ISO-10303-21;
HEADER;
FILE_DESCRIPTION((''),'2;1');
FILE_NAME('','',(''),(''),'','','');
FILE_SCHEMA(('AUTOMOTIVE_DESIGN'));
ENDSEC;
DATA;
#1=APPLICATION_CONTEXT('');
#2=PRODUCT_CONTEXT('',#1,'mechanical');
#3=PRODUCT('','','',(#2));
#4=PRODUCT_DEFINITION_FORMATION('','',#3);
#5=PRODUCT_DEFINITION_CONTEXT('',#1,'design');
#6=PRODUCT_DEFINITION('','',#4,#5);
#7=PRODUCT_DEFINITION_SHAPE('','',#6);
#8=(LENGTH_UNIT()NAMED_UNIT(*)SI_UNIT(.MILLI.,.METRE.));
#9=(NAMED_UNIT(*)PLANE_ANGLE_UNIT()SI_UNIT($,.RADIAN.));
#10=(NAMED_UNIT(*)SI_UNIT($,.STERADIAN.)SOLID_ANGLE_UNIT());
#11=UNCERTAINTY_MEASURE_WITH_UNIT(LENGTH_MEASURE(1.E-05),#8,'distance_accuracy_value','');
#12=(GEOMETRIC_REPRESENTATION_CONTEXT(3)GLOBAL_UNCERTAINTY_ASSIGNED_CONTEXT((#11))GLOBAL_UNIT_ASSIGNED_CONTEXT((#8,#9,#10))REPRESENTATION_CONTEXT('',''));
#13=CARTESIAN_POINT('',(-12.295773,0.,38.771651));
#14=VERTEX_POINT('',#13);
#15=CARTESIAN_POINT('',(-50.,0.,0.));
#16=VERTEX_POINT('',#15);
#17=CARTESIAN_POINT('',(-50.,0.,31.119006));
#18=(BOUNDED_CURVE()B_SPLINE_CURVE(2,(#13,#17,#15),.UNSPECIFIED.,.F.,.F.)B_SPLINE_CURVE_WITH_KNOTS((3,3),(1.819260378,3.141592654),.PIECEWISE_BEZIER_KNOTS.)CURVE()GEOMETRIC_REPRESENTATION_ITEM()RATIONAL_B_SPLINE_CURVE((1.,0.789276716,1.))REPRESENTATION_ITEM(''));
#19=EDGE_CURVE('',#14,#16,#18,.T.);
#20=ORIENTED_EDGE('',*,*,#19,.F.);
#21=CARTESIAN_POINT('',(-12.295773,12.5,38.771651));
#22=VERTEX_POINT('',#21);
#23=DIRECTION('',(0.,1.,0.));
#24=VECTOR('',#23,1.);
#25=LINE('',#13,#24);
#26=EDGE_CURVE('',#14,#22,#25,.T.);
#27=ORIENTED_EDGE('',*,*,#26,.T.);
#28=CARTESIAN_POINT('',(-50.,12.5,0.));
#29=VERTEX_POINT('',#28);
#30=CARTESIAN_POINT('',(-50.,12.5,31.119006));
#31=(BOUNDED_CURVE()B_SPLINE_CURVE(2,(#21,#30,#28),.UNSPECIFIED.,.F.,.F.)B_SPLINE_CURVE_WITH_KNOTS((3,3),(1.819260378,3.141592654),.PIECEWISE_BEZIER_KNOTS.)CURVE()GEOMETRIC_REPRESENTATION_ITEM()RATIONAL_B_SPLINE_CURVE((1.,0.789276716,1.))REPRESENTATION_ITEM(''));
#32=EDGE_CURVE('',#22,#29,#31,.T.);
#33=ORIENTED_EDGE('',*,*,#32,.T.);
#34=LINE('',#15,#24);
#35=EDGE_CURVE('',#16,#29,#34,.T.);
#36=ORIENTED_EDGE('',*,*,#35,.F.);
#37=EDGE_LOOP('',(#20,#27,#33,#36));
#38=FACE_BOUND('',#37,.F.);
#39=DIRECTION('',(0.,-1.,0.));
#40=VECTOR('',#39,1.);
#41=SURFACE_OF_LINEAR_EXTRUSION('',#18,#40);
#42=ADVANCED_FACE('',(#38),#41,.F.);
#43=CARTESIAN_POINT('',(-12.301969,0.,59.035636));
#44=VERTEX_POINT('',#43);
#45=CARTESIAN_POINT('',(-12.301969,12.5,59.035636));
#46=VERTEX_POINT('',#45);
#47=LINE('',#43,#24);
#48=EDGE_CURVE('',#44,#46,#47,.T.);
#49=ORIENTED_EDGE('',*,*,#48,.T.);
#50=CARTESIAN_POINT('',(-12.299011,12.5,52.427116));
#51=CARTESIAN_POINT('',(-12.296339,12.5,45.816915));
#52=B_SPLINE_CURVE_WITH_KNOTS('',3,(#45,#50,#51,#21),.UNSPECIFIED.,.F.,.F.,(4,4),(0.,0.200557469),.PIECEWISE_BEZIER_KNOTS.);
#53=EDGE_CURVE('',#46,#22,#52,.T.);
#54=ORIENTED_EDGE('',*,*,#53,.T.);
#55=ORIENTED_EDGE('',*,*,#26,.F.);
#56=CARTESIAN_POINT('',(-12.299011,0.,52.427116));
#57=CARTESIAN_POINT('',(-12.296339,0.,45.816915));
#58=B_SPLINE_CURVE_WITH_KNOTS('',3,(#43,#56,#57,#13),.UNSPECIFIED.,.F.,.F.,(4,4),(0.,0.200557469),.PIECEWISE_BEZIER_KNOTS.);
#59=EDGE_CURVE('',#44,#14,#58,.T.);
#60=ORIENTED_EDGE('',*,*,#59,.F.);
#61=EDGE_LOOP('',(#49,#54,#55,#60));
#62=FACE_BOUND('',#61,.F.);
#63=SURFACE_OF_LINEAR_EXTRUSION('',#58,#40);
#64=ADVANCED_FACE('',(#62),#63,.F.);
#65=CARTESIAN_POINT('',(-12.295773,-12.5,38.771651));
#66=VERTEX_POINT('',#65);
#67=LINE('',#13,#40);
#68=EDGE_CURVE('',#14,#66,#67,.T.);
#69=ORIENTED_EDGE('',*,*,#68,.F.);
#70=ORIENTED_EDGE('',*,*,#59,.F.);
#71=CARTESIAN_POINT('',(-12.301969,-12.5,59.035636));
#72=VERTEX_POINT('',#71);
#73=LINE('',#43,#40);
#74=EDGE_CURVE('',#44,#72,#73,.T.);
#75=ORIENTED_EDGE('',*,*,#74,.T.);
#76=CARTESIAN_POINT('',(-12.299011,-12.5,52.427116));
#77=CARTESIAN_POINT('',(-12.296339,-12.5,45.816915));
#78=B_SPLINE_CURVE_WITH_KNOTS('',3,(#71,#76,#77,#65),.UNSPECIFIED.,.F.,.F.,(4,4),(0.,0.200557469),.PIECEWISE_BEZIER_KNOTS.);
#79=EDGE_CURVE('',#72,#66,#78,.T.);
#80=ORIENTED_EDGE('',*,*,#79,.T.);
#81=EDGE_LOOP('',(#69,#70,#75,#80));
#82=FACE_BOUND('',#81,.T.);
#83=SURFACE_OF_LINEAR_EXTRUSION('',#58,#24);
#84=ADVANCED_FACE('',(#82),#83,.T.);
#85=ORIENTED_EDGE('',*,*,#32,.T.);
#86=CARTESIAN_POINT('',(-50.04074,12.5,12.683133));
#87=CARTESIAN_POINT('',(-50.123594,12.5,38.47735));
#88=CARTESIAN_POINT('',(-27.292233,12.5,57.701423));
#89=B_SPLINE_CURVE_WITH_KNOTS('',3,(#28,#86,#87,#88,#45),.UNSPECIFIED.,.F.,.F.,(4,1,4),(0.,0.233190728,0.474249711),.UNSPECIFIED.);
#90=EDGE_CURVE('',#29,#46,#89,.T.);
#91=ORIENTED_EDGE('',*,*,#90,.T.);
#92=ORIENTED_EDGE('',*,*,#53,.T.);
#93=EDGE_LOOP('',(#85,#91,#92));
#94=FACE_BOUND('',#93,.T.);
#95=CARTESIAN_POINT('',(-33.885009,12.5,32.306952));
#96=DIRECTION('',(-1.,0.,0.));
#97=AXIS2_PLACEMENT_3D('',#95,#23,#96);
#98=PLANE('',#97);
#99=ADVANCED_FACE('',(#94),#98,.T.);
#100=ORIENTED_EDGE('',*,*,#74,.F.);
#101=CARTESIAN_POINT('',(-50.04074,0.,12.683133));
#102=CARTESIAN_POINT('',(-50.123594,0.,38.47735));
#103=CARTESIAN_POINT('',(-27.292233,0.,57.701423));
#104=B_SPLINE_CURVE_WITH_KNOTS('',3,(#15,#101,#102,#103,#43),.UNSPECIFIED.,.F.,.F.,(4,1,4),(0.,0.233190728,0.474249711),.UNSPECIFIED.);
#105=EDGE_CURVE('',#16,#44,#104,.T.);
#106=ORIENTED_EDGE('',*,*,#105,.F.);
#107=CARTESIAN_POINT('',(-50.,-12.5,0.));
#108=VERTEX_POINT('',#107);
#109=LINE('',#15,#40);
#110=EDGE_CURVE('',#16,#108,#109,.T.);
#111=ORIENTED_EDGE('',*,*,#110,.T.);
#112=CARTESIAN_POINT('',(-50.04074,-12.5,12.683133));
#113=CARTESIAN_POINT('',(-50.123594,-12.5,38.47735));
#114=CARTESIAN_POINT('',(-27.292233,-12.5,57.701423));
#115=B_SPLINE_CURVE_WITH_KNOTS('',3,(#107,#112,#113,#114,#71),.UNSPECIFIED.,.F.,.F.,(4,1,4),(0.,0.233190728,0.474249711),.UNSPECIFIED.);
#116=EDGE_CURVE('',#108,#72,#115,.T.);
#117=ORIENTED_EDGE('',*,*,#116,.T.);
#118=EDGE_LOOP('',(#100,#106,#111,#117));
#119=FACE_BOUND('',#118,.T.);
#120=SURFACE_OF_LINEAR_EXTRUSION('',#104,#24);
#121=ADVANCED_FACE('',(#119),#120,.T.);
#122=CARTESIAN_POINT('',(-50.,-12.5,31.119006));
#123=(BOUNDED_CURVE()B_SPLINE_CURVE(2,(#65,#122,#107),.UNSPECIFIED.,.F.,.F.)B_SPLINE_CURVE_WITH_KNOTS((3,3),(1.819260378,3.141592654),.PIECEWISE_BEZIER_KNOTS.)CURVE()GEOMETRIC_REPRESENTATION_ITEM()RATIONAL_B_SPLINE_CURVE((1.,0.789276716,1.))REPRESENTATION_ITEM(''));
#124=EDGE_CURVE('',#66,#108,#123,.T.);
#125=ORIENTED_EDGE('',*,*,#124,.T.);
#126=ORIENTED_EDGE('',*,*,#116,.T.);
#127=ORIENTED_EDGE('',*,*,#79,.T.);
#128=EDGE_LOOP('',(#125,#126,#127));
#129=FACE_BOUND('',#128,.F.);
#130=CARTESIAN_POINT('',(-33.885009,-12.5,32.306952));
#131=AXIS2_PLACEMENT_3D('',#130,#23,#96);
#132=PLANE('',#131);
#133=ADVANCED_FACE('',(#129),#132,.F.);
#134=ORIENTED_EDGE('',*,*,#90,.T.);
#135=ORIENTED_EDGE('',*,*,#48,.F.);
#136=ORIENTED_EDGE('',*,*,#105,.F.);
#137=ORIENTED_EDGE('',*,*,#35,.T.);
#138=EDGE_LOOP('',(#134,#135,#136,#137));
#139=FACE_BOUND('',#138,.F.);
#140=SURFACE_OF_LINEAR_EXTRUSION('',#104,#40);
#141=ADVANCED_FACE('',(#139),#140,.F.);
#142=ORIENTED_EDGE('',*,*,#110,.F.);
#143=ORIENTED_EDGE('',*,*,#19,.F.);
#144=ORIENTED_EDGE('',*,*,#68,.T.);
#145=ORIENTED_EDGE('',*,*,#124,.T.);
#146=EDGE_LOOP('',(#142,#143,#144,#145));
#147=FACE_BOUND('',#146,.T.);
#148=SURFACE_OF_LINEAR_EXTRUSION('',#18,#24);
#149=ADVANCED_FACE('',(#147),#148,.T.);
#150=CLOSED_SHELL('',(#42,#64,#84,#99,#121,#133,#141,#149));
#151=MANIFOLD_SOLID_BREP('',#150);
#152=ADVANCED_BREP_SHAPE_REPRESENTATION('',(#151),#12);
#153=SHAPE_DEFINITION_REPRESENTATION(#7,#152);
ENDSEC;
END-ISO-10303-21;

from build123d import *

# Parameters (mm, degrees)
F1_DEPTH = 12.5


with BuildPart() as f1:
    # F0 (on Front) → F1 (new body, symmetric)
    with BuildSketch(Plane.XZ):
        with BuildLine():
            add(Edge.make_bspline(
                [(-50, 0), (-50.0407398567, 12.683133187), (-50.1235942028, 38.4773502806), (-27.2922330655, 57.7014225305), (-12.3019693419, 59.0356364846)],
                knots=[0, 0, 0, 0, 0.2331907275, 0.4742497111, 0.4742497111, 0.4742497111, 0.4742497111], degree=3))
            add(Edge.make_bspline(
                [(-12.2957733851, 38.7716511435), (-50, 31.1190061835), (-50, 0)],
                knots=[1.8192603775, 1.8192603775, 1.8192603775, 3.1415926536, 3.1415926536, 3.1415926536], degree=2, weights=[1, 0.7892767156, 1]))
            add(Edge.make_bspline(
                [(-12.3019693419, 59.0356364846), (-12.2990112342, 52.4271155186), (-12.2963394707, 45.8169153956), (-12.2957733851, 38.7716511435)],
                knots=[0, 0, 0, 0, 0.2005574694, 0.2005574694, 0.2005574694, 0.2005574694], degree=3))
        make_face()
    extrude(amount=F1_DEPTH, both=True)


solid = f1.part
